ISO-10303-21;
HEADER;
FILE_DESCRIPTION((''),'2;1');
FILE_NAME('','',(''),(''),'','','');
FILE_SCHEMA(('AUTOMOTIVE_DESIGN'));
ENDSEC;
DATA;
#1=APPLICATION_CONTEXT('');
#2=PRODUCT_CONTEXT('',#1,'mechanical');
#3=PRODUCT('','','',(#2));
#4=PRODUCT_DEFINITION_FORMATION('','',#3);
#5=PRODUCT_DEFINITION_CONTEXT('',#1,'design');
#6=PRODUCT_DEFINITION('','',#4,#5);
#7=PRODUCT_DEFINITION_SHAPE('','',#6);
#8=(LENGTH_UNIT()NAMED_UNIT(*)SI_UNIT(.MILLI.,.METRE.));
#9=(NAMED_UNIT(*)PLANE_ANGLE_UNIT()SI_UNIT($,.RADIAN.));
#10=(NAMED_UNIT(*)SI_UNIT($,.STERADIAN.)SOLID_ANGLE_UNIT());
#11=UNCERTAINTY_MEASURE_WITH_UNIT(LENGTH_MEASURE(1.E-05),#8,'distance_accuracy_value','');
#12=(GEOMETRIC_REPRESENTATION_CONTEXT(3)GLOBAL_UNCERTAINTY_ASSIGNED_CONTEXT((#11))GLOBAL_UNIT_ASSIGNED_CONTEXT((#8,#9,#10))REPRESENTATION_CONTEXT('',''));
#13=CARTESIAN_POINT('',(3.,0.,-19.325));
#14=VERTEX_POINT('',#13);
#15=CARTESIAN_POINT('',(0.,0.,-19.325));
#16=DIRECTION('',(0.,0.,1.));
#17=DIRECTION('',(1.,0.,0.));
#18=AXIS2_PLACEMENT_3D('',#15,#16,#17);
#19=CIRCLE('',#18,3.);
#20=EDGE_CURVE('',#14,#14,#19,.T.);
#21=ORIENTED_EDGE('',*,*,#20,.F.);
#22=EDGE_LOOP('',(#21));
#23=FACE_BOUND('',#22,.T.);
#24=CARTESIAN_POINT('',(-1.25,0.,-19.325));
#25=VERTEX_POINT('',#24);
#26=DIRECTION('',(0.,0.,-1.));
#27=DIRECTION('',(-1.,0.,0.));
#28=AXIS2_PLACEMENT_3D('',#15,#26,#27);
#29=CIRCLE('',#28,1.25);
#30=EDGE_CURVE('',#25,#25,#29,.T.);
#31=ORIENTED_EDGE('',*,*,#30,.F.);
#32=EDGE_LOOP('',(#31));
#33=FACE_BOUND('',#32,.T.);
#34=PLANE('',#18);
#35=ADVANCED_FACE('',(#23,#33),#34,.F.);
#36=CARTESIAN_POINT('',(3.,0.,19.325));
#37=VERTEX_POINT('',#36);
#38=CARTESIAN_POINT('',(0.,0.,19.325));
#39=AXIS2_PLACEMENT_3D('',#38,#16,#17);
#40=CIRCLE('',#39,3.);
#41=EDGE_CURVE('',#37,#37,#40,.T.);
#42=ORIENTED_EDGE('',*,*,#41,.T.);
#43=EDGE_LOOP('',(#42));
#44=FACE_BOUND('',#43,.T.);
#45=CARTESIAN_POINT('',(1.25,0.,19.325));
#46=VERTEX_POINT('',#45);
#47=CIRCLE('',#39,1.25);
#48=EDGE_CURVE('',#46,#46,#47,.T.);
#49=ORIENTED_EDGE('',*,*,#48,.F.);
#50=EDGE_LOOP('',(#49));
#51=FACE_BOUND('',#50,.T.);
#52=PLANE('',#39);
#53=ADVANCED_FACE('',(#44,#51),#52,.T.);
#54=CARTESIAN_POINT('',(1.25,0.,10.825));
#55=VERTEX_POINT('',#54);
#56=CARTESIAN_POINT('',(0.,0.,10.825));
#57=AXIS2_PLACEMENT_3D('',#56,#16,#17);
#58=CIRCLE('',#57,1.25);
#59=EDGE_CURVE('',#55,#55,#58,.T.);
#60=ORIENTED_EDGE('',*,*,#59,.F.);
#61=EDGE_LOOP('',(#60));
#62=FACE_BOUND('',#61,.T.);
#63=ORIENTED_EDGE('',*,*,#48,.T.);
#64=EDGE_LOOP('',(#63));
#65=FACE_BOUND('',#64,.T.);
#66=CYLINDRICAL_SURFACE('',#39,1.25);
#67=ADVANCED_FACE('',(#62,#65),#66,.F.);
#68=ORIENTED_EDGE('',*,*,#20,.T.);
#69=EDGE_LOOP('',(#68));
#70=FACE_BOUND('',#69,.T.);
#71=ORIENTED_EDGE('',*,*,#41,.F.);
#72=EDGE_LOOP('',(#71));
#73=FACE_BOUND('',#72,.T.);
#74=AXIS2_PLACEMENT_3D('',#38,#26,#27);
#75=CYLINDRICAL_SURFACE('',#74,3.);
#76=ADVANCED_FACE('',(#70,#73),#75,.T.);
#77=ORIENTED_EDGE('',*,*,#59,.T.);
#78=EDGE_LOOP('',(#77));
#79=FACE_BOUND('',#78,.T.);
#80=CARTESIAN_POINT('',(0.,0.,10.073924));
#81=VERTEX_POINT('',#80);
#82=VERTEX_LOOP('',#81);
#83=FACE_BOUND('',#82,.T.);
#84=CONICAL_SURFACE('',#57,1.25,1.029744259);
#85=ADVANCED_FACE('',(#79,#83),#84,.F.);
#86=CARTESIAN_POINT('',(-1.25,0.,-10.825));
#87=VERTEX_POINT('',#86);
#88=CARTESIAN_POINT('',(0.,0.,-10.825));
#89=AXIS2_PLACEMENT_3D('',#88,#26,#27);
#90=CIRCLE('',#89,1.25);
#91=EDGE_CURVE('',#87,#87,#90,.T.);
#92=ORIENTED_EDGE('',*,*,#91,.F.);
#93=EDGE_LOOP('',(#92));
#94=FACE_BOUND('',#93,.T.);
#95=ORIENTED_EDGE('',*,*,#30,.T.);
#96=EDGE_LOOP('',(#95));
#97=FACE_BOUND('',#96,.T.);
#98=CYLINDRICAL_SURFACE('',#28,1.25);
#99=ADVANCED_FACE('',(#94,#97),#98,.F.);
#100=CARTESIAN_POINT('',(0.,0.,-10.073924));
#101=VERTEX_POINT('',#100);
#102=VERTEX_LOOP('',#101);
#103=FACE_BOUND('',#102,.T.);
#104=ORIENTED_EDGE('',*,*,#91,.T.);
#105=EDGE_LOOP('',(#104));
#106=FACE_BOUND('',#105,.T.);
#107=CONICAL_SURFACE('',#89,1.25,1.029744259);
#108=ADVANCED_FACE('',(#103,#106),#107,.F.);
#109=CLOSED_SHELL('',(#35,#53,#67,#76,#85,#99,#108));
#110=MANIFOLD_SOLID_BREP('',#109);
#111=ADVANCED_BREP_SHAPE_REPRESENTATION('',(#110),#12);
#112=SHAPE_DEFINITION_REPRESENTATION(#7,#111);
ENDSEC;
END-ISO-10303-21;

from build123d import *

# Parameters (mm, degrees)
SKETCH_1_R      = 3
SKETCH_1_R_2    = 1.6
EXTRUDE_1_DEPTH = 19.325


# Read off the part's stored shape, not the designer's step: M3x0.5 ねじ穴1
with BuildPart() as part:
    # ｽｹｯﾁ1 → ﾎﾞｽ - 押し出し1 (new, symmetric)
    # profile 1 of 2: a face of its own
    with BuildSketch(Plane.XY):
        Circle(SKETCH_1_R)
        Circle(SKETCH_1_R_2, mode=Mode.SUBTRACT)
    # profile 2 of 2: a face of its own
    with BuildSketch(Plane.XY):
        Circle(SKETCH_1_R_2)
    extrude(amount=EXTRUDE_1_DEPTH, both=True)

    # M3x0.5 ねじ穴1 outline → M3x0.5 ねじ穴1 (revolve, cut)
    with BuildSketch(Plane.XZ):
        Polygon((1.25, -10.825), (0, -10.073924226), (0, -19.325), (1.25, -19.325), align=None)
        Polygon((0, 19.325), (0, 10.073924226), (1.25, 10.825), (1.25, 19.325), align=None)
    revolve(axis=Axis((0, 0, 0), (0, 0, 1)), mode=Mode.SUBTRACT)


solid = part.part
